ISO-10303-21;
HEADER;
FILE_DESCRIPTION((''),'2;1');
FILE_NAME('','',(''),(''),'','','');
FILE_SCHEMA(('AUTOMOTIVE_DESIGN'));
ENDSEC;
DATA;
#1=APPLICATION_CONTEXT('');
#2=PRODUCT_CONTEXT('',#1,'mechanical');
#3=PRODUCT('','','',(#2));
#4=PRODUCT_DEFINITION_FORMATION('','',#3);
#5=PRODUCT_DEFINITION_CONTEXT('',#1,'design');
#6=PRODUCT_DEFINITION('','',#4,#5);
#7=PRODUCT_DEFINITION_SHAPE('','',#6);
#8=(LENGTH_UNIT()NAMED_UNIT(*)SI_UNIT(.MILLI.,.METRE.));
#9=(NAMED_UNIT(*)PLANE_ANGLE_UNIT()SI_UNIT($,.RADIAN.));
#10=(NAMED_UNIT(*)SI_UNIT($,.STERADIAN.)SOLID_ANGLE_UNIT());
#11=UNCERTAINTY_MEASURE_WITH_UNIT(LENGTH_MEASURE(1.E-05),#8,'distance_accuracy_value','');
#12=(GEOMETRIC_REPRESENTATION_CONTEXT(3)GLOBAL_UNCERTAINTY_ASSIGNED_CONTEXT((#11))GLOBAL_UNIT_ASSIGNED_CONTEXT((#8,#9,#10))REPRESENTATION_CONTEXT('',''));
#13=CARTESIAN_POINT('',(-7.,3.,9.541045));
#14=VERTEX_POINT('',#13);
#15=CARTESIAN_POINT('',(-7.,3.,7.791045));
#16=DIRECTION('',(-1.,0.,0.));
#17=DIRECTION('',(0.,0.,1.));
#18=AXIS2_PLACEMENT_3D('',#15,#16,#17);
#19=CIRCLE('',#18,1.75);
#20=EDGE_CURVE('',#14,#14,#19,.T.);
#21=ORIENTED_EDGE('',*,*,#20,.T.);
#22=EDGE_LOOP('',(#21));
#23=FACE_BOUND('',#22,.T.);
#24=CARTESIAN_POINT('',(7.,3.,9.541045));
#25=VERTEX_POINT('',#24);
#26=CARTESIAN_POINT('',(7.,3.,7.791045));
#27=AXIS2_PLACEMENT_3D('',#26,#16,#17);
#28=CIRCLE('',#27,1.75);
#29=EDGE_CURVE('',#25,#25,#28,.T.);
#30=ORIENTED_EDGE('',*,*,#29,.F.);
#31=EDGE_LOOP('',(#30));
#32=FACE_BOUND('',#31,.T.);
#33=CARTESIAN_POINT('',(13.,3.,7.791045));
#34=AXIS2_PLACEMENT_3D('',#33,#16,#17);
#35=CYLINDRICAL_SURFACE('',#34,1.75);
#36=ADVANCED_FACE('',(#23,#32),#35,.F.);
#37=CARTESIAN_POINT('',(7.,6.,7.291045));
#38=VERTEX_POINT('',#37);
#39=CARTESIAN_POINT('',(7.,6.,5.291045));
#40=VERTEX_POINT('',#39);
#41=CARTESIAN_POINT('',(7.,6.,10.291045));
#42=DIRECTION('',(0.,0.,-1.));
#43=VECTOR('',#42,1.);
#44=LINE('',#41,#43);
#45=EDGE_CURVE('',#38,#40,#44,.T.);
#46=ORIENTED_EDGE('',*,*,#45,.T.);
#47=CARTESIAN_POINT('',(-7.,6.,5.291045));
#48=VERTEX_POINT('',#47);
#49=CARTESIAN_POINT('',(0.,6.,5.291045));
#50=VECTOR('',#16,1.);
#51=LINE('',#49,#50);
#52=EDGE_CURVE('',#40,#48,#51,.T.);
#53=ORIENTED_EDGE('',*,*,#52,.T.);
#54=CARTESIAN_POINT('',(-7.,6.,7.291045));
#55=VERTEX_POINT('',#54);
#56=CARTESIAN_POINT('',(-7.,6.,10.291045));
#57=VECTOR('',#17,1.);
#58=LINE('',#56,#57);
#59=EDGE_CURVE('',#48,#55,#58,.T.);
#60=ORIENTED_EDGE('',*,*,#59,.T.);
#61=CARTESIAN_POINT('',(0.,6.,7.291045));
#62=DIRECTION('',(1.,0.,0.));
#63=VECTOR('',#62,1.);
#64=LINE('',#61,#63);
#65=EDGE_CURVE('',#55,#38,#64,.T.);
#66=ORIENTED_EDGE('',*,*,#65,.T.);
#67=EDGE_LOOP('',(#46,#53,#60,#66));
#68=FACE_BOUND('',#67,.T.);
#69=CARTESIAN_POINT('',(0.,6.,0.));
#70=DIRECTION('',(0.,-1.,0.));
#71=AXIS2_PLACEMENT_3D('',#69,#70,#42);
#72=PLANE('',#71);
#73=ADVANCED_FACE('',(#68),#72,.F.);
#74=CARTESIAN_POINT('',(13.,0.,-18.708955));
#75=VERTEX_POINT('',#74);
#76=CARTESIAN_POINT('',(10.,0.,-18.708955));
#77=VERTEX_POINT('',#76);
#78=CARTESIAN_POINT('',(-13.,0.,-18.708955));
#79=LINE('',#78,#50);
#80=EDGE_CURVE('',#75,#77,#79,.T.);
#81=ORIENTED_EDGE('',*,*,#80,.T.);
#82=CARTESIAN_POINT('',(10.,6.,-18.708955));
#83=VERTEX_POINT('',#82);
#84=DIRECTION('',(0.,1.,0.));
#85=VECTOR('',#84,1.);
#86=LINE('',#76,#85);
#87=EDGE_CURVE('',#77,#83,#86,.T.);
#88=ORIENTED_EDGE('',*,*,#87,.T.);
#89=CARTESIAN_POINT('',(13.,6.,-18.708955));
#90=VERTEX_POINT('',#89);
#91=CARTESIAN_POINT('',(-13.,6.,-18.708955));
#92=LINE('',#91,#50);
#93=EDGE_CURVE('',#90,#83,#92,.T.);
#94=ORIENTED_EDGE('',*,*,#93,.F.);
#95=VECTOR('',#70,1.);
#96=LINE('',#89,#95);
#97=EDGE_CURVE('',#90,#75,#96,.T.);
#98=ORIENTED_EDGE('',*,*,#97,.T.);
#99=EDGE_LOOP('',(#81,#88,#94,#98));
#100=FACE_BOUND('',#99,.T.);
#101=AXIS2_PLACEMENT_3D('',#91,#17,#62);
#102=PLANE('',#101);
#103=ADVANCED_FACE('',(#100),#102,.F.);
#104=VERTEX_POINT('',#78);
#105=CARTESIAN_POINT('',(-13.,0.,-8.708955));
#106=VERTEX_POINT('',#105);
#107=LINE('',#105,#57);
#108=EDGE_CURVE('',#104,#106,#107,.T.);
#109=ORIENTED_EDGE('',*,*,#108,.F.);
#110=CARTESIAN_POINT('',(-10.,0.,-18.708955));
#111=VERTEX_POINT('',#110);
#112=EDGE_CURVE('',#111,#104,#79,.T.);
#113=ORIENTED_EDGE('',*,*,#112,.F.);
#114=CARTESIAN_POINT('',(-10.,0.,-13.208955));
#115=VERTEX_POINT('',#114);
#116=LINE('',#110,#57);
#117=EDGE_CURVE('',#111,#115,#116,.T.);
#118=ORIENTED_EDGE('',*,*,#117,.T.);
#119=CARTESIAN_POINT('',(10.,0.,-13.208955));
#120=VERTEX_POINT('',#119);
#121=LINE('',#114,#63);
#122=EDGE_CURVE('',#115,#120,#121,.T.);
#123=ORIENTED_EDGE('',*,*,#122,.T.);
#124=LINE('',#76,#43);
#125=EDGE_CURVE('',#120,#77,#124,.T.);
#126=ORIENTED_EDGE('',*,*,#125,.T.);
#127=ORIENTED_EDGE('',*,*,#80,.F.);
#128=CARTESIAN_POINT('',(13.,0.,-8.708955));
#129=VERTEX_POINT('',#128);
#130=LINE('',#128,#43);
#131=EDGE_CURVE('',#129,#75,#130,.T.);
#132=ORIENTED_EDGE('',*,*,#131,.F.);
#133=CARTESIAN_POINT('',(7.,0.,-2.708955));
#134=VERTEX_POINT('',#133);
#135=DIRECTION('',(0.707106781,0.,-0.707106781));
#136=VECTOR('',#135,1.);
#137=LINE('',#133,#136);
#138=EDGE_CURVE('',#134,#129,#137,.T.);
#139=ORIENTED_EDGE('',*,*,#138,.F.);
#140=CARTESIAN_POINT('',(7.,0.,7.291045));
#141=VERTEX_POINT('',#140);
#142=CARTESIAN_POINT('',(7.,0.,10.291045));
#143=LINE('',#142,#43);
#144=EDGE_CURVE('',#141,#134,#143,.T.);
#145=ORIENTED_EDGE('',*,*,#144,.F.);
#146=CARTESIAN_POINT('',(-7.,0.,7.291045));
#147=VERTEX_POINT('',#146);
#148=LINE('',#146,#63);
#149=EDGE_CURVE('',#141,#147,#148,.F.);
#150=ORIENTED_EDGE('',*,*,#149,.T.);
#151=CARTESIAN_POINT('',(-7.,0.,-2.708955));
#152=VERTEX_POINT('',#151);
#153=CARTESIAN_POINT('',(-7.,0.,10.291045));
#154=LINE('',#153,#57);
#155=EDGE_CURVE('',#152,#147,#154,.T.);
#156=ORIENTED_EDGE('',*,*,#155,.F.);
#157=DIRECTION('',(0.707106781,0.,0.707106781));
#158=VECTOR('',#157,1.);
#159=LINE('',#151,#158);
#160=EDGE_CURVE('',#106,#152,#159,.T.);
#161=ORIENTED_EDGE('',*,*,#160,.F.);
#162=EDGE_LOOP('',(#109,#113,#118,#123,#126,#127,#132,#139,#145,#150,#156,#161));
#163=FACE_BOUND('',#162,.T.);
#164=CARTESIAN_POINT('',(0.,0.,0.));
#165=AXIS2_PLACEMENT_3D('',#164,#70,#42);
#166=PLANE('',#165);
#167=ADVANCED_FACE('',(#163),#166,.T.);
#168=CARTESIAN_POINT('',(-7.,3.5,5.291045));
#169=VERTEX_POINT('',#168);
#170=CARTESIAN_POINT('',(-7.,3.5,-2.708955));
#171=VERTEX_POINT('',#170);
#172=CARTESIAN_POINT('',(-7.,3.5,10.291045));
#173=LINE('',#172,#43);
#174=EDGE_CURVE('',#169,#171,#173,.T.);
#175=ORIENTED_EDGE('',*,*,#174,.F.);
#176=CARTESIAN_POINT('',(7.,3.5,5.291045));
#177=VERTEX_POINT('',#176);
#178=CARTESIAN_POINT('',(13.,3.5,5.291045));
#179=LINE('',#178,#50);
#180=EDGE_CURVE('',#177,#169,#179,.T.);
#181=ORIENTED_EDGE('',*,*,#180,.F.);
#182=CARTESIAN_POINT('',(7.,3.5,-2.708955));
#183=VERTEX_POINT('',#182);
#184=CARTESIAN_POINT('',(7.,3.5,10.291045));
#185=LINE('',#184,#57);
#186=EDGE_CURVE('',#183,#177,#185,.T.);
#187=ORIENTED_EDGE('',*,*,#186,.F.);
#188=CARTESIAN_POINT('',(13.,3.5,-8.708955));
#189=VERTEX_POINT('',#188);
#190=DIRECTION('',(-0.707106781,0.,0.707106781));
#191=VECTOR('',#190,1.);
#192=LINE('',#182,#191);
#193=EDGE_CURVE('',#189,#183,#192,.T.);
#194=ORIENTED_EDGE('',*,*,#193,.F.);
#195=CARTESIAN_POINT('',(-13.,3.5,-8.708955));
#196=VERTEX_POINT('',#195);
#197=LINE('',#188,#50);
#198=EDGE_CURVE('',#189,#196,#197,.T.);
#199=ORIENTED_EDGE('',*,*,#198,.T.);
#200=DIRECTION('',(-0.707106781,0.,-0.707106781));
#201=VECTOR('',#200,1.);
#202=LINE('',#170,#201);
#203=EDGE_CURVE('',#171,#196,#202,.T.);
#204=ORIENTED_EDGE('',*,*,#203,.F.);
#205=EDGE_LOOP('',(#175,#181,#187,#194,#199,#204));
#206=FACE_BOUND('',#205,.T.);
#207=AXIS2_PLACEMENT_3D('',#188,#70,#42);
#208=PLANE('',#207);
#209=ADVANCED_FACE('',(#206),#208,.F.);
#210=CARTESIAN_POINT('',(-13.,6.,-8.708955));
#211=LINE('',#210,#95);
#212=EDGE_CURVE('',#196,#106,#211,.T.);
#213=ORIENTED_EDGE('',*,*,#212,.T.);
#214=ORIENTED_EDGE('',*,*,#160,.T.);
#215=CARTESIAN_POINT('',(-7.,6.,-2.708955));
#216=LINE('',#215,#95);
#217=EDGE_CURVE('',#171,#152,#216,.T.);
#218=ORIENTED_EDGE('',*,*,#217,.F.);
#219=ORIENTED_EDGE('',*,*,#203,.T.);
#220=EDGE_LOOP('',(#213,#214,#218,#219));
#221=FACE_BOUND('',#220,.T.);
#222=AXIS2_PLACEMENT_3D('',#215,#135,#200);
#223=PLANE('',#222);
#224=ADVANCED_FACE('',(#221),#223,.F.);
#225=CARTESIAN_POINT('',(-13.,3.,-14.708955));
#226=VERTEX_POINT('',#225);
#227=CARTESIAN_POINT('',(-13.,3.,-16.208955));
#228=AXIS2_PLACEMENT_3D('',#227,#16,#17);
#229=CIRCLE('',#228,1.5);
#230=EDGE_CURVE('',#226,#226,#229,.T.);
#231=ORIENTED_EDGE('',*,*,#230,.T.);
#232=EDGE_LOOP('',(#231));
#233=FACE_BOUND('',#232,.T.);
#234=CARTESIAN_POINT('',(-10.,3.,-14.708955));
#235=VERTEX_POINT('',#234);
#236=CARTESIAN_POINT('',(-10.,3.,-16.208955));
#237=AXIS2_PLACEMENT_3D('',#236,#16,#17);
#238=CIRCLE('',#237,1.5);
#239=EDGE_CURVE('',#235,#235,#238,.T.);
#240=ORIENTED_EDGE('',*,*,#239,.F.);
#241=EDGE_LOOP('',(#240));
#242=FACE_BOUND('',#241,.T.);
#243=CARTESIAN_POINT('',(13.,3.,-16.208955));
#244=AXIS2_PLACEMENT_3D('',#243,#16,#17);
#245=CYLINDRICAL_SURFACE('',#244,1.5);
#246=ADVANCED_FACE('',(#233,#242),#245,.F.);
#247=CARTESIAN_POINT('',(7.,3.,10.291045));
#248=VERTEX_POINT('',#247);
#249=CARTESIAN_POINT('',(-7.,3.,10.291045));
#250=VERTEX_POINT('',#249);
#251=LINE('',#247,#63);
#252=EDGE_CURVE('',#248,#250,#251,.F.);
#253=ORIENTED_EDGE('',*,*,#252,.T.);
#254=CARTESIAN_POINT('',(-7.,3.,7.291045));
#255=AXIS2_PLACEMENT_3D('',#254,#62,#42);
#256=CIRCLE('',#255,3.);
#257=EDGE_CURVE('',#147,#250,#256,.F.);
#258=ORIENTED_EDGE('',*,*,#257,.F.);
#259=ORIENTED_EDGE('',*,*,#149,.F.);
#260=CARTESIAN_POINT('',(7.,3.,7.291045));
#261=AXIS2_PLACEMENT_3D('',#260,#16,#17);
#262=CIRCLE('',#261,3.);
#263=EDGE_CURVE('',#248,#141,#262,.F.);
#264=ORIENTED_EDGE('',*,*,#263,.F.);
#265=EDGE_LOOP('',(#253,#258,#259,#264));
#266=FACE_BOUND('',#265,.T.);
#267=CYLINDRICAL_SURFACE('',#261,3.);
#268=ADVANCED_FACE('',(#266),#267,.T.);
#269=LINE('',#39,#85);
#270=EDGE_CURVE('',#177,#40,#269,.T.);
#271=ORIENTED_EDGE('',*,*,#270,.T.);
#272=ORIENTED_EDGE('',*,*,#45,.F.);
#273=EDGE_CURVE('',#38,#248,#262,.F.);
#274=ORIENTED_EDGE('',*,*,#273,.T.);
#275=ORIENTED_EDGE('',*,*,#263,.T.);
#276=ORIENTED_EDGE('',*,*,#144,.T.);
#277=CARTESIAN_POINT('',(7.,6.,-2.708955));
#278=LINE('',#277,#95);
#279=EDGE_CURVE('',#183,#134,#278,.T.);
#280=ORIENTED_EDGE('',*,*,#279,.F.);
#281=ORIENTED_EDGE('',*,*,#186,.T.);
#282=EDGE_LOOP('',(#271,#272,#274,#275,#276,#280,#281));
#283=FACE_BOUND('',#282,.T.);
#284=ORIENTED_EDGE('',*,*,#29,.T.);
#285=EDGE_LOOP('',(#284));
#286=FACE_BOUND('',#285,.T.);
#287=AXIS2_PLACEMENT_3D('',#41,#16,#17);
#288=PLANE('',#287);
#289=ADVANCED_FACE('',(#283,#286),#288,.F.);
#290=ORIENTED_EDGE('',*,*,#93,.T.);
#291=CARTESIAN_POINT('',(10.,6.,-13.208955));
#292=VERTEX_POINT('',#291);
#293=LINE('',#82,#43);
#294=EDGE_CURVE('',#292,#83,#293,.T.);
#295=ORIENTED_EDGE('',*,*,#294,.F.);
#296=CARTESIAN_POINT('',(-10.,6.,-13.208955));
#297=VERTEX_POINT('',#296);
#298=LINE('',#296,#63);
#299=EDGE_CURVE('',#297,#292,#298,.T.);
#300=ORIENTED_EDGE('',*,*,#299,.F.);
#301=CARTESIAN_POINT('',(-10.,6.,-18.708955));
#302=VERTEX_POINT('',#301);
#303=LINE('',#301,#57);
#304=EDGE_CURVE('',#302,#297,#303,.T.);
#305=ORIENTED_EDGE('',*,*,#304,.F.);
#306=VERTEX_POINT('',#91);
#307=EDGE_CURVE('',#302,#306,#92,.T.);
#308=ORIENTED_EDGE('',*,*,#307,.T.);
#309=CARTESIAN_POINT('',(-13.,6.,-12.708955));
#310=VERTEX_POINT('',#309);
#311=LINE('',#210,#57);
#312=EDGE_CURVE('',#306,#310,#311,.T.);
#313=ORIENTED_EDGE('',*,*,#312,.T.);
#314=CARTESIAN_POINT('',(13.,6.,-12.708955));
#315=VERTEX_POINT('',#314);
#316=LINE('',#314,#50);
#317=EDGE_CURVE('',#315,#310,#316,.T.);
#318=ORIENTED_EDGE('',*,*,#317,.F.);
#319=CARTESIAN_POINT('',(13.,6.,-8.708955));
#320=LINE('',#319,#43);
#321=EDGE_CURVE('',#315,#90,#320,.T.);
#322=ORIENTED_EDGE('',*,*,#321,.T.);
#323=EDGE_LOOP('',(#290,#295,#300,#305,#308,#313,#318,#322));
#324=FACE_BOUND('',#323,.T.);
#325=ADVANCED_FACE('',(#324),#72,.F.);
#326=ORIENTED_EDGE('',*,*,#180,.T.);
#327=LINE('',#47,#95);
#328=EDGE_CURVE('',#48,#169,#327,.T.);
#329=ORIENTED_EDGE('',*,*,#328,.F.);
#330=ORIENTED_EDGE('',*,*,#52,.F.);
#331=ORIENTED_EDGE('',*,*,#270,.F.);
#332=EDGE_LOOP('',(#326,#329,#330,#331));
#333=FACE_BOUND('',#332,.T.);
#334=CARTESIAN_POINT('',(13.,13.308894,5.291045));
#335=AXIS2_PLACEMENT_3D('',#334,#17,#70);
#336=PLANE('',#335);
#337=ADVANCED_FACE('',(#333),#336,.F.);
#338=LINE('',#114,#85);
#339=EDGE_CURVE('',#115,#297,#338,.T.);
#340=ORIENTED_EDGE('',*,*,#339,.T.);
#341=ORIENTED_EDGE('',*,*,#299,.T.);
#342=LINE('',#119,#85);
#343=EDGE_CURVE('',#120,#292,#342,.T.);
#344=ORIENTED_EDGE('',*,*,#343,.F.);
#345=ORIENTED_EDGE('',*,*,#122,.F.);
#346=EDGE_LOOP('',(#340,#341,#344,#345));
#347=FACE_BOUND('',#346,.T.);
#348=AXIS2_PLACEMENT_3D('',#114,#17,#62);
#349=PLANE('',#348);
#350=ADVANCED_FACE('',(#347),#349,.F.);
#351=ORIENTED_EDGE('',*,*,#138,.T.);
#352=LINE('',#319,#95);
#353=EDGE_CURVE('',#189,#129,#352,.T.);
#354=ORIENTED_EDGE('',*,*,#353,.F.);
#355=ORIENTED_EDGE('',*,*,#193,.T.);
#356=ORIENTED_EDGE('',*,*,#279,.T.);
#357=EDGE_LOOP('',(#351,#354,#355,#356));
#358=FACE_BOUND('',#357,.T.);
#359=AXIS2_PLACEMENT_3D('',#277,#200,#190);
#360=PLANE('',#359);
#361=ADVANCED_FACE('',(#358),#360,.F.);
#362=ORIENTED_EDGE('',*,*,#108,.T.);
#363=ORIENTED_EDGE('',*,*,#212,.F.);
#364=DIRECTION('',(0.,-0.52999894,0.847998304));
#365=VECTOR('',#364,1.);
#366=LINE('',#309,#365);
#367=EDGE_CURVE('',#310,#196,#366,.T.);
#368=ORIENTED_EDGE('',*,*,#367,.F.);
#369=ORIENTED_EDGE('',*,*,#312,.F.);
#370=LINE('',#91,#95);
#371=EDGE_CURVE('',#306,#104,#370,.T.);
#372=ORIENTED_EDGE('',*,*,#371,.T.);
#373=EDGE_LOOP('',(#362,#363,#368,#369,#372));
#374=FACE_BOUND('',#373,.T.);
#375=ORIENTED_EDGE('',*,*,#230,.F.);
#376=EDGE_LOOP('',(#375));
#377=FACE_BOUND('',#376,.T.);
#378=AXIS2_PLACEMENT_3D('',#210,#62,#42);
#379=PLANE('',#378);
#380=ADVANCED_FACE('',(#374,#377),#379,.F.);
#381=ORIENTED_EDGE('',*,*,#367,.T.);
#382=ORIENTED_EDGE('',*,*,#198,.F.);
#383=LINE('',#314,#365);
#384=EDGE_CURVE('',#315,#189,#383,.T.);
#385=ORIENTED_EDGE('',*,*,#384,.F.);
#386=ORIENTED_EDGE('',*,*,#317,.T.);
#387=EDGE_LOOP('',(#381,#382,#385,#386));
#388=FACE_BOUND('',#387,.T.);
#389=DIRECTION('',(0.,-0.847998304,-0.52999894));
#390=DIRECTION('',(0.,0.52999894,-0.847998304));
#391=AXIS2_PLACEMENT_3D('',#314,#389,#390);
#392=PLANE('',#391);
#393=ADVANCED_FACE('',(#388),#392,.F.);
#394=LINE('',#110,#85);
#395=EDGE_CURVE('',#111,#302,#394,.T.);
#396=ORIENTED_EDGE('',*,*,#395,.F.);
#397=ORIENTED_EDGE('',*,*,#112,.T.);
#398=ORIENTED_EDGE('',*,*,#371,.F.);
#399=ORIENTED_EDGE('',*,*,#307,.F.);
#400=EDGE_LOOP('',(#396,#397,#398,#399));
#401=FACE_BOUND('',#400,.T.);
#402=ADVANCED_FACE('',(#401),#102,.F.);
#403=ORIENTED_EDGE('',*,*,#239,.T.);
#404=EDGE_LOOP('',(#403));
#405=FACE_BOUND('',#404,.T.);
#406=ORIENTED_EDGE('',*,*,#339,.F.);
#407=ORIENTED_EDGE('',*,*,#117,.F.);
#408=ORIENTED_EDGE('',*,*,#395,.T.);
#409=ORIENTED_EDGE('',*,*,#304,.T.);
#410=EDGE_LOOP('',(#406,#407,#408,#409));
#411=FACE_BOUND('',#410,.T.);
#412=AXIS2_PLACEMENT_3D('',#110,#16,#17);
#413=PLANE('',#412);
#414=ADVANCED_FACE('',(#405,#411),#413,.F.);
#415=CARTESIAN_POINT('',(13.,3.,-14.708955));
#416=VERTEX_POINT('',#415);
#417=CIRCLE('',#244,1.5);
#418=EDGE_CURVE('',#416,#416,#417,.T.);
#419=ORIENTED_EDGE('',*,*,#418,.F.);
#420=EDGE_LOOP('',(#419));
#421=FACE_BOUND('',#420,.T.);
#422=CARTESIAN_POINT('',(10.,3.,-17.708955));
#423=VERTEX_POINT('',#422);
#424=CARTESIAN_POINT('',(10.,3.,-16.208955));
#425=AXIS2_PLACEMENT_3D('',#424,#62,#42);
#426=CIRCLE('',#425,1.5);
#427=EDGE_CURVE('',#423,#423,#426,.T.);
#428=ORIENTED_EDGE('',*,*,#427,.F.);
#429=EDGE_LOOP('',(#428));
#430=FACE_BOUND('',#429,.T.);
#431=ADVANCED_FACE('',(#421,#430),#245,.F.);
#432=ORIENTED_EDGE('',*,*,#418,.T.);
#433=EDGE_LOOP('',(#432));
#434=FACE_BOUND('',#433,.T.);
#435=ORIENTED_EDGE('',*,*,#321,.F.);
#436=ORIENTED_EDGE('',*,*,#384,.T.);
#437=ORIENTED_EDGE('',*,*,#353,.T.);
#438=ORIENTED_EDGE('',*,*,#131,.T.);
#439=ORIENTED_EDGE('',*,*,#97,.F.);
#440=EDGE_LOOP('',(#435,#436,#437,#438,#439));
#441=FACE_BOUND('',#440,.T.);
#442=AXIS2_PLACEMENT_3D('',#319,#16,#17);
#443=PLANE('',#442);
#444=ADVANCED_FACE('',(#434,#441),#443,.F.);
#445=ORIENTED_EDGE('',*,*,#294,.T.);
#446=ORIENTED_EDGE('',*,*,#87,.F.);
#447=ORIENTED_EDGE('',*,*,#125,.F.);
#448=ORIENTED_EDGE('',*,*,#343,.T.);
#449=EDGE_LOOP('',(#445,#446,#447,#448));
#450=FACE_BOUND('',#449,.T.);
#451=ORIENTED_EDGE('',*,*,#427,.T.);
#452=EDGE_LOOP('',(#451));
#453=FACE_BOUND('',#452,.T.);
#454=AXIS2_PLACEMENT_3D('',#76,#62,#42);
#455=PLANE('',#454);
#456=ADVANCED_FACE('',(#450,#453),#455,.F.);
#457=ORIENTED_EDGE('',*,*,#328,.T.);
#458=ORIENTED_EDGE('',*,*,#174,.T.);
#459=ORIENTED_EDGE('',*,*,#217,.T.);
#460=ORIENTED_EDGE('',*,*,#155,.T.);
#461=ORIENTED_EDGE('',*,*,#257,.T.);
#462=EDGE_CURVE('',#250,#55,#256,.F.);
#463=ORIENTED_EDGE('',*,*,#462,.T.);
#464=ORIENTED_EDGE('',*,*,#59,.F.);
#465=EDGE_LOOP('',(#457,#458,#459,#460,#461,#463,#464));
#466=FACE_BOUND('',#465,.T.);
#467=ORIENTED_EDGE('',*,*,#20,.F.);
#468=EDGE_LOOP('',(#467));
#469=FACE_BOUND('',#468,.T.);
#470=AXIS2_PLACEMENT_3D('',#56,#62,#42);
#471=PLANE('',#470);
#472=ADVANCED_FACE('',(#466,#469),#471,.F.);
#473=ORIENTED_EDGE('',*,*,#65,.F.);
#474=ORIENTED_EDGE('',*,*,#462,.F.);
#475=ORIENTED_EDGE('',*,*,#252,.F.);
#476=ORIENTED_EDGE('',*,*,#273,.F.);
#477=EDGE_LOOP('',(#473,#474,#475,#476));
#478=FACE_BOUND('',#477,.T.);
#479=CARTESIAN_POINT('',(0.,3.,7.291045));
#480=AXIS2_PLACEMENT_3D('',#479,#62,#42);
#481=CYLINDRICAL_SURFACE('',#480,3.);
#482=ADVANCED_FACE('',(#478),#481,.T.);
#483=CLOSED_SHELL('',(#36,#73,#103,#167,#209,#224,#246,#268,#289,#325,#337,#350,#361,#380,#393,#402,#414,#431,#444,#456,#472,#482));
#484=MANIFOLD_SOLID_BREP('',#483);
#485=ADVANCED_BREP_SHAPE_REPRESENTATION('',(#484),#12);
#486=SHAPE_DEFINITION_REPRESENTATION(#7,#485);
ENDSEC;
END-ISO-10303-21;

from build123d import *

# Parameters (mm, degrees)
RESSALTO_EXTRUS_O1_DEPTH = 6
CORTE_EXTRUS_O1_DEPTH    = 33.58872513
ESBO_O5_R                = 1.75
CORTE_EXTRUS_O2_DEPTH    = 29.036137494
FILETE1_R                = 3
ESBO_O6_W                = 20
ESBO_O6_H                = 5.5
CORTE_EXTRUS_O3_DEPTH    = 24.558968686
ESBO_O7_R                = 1.5
CORTE_EXTRUS_O4_DEPTH    = 33.58872513


with BuildPart() as part:
    # Esboço1 → Ressalto-extrusão1 (new body)
    with BuildSketch(Plane(origin=(0, 0, 0), x_dir=(1, 0, 0), z_dir=(0, 1, 0))):
        Polygon((7, -10.291044776), (-7, -10.291044776), (-7, 2.708955224), (-13, 8.708955224), (-13, 18.708955224), (13, 18.708955224), (13, 8.708955224), (7, 2.708955224), align=None)
    extrude(amount=RESSALTO_EXTRUS_O1_DEPTH)

    # Esboço4 → Corte-extrusão1 (cut, through all)
    with BuildSketch(Plane.ZY.offset(13)):
        Polygon((-12.708955224, 6), (-8.708955224, 3.5), (5.291044776, 3.5), (5.291044776, 13.308893529), (-12.708955224, 13.308893529), align=None)
    extrude(amount=-CORTE_EXTRUS_O1_DEPTH, mode=Mode.SUBTRACT)

    # Esboço5 → Corte-extrusão2 (cut, through all)
    with BuildSketch(Plane.ZY.offset(7)):
        with Locations((7.791044776, 3)):
            Circle(ESBO_O5_R)
    extrude(amount=-CORTE_EXTRUS_O2_DEPTH, mode=Mode.SUBTRACT)

    # Filete1
    filete1_edges = [part.edges().sort_by_distance(p)[0] for p in [
        (0, 0, 10.291044776),
        (0, 6, 10.291044776),
    ]]
    fillet(filete1_edges, radius=FILETE1_R - 0.0001)  # a hair under: the kernel refuses the full size

    # Esboço6 → Corte-extrusão3 (cut, through all)
    with BuildSketch(Plane(origin=(0, 6, 0), x_dir=(1, 0, 0), z_dir=(0, 1, 0))):
        with Locations((0, 15.958955224)):
            Rectangle(ESBO_O6_W, ESBO_O6_H)
    extrude(amount=-CORTE_EXTRUS_O3_DEPTH, mode=Mode.SUBTRACT)

    # Esboço7 → Corte-extrusão4 (cut, through all)
    with BuildSketch(Plane.ZY.offset(13)):
        with Locations((-16.208955224, 3)):
            Circle(ESBO_O7_R)
    extrude(amount=-CORTE_EXTRUS_O4_DEPTH, mode=Mode.SUBTRACT)


solid = part.part
